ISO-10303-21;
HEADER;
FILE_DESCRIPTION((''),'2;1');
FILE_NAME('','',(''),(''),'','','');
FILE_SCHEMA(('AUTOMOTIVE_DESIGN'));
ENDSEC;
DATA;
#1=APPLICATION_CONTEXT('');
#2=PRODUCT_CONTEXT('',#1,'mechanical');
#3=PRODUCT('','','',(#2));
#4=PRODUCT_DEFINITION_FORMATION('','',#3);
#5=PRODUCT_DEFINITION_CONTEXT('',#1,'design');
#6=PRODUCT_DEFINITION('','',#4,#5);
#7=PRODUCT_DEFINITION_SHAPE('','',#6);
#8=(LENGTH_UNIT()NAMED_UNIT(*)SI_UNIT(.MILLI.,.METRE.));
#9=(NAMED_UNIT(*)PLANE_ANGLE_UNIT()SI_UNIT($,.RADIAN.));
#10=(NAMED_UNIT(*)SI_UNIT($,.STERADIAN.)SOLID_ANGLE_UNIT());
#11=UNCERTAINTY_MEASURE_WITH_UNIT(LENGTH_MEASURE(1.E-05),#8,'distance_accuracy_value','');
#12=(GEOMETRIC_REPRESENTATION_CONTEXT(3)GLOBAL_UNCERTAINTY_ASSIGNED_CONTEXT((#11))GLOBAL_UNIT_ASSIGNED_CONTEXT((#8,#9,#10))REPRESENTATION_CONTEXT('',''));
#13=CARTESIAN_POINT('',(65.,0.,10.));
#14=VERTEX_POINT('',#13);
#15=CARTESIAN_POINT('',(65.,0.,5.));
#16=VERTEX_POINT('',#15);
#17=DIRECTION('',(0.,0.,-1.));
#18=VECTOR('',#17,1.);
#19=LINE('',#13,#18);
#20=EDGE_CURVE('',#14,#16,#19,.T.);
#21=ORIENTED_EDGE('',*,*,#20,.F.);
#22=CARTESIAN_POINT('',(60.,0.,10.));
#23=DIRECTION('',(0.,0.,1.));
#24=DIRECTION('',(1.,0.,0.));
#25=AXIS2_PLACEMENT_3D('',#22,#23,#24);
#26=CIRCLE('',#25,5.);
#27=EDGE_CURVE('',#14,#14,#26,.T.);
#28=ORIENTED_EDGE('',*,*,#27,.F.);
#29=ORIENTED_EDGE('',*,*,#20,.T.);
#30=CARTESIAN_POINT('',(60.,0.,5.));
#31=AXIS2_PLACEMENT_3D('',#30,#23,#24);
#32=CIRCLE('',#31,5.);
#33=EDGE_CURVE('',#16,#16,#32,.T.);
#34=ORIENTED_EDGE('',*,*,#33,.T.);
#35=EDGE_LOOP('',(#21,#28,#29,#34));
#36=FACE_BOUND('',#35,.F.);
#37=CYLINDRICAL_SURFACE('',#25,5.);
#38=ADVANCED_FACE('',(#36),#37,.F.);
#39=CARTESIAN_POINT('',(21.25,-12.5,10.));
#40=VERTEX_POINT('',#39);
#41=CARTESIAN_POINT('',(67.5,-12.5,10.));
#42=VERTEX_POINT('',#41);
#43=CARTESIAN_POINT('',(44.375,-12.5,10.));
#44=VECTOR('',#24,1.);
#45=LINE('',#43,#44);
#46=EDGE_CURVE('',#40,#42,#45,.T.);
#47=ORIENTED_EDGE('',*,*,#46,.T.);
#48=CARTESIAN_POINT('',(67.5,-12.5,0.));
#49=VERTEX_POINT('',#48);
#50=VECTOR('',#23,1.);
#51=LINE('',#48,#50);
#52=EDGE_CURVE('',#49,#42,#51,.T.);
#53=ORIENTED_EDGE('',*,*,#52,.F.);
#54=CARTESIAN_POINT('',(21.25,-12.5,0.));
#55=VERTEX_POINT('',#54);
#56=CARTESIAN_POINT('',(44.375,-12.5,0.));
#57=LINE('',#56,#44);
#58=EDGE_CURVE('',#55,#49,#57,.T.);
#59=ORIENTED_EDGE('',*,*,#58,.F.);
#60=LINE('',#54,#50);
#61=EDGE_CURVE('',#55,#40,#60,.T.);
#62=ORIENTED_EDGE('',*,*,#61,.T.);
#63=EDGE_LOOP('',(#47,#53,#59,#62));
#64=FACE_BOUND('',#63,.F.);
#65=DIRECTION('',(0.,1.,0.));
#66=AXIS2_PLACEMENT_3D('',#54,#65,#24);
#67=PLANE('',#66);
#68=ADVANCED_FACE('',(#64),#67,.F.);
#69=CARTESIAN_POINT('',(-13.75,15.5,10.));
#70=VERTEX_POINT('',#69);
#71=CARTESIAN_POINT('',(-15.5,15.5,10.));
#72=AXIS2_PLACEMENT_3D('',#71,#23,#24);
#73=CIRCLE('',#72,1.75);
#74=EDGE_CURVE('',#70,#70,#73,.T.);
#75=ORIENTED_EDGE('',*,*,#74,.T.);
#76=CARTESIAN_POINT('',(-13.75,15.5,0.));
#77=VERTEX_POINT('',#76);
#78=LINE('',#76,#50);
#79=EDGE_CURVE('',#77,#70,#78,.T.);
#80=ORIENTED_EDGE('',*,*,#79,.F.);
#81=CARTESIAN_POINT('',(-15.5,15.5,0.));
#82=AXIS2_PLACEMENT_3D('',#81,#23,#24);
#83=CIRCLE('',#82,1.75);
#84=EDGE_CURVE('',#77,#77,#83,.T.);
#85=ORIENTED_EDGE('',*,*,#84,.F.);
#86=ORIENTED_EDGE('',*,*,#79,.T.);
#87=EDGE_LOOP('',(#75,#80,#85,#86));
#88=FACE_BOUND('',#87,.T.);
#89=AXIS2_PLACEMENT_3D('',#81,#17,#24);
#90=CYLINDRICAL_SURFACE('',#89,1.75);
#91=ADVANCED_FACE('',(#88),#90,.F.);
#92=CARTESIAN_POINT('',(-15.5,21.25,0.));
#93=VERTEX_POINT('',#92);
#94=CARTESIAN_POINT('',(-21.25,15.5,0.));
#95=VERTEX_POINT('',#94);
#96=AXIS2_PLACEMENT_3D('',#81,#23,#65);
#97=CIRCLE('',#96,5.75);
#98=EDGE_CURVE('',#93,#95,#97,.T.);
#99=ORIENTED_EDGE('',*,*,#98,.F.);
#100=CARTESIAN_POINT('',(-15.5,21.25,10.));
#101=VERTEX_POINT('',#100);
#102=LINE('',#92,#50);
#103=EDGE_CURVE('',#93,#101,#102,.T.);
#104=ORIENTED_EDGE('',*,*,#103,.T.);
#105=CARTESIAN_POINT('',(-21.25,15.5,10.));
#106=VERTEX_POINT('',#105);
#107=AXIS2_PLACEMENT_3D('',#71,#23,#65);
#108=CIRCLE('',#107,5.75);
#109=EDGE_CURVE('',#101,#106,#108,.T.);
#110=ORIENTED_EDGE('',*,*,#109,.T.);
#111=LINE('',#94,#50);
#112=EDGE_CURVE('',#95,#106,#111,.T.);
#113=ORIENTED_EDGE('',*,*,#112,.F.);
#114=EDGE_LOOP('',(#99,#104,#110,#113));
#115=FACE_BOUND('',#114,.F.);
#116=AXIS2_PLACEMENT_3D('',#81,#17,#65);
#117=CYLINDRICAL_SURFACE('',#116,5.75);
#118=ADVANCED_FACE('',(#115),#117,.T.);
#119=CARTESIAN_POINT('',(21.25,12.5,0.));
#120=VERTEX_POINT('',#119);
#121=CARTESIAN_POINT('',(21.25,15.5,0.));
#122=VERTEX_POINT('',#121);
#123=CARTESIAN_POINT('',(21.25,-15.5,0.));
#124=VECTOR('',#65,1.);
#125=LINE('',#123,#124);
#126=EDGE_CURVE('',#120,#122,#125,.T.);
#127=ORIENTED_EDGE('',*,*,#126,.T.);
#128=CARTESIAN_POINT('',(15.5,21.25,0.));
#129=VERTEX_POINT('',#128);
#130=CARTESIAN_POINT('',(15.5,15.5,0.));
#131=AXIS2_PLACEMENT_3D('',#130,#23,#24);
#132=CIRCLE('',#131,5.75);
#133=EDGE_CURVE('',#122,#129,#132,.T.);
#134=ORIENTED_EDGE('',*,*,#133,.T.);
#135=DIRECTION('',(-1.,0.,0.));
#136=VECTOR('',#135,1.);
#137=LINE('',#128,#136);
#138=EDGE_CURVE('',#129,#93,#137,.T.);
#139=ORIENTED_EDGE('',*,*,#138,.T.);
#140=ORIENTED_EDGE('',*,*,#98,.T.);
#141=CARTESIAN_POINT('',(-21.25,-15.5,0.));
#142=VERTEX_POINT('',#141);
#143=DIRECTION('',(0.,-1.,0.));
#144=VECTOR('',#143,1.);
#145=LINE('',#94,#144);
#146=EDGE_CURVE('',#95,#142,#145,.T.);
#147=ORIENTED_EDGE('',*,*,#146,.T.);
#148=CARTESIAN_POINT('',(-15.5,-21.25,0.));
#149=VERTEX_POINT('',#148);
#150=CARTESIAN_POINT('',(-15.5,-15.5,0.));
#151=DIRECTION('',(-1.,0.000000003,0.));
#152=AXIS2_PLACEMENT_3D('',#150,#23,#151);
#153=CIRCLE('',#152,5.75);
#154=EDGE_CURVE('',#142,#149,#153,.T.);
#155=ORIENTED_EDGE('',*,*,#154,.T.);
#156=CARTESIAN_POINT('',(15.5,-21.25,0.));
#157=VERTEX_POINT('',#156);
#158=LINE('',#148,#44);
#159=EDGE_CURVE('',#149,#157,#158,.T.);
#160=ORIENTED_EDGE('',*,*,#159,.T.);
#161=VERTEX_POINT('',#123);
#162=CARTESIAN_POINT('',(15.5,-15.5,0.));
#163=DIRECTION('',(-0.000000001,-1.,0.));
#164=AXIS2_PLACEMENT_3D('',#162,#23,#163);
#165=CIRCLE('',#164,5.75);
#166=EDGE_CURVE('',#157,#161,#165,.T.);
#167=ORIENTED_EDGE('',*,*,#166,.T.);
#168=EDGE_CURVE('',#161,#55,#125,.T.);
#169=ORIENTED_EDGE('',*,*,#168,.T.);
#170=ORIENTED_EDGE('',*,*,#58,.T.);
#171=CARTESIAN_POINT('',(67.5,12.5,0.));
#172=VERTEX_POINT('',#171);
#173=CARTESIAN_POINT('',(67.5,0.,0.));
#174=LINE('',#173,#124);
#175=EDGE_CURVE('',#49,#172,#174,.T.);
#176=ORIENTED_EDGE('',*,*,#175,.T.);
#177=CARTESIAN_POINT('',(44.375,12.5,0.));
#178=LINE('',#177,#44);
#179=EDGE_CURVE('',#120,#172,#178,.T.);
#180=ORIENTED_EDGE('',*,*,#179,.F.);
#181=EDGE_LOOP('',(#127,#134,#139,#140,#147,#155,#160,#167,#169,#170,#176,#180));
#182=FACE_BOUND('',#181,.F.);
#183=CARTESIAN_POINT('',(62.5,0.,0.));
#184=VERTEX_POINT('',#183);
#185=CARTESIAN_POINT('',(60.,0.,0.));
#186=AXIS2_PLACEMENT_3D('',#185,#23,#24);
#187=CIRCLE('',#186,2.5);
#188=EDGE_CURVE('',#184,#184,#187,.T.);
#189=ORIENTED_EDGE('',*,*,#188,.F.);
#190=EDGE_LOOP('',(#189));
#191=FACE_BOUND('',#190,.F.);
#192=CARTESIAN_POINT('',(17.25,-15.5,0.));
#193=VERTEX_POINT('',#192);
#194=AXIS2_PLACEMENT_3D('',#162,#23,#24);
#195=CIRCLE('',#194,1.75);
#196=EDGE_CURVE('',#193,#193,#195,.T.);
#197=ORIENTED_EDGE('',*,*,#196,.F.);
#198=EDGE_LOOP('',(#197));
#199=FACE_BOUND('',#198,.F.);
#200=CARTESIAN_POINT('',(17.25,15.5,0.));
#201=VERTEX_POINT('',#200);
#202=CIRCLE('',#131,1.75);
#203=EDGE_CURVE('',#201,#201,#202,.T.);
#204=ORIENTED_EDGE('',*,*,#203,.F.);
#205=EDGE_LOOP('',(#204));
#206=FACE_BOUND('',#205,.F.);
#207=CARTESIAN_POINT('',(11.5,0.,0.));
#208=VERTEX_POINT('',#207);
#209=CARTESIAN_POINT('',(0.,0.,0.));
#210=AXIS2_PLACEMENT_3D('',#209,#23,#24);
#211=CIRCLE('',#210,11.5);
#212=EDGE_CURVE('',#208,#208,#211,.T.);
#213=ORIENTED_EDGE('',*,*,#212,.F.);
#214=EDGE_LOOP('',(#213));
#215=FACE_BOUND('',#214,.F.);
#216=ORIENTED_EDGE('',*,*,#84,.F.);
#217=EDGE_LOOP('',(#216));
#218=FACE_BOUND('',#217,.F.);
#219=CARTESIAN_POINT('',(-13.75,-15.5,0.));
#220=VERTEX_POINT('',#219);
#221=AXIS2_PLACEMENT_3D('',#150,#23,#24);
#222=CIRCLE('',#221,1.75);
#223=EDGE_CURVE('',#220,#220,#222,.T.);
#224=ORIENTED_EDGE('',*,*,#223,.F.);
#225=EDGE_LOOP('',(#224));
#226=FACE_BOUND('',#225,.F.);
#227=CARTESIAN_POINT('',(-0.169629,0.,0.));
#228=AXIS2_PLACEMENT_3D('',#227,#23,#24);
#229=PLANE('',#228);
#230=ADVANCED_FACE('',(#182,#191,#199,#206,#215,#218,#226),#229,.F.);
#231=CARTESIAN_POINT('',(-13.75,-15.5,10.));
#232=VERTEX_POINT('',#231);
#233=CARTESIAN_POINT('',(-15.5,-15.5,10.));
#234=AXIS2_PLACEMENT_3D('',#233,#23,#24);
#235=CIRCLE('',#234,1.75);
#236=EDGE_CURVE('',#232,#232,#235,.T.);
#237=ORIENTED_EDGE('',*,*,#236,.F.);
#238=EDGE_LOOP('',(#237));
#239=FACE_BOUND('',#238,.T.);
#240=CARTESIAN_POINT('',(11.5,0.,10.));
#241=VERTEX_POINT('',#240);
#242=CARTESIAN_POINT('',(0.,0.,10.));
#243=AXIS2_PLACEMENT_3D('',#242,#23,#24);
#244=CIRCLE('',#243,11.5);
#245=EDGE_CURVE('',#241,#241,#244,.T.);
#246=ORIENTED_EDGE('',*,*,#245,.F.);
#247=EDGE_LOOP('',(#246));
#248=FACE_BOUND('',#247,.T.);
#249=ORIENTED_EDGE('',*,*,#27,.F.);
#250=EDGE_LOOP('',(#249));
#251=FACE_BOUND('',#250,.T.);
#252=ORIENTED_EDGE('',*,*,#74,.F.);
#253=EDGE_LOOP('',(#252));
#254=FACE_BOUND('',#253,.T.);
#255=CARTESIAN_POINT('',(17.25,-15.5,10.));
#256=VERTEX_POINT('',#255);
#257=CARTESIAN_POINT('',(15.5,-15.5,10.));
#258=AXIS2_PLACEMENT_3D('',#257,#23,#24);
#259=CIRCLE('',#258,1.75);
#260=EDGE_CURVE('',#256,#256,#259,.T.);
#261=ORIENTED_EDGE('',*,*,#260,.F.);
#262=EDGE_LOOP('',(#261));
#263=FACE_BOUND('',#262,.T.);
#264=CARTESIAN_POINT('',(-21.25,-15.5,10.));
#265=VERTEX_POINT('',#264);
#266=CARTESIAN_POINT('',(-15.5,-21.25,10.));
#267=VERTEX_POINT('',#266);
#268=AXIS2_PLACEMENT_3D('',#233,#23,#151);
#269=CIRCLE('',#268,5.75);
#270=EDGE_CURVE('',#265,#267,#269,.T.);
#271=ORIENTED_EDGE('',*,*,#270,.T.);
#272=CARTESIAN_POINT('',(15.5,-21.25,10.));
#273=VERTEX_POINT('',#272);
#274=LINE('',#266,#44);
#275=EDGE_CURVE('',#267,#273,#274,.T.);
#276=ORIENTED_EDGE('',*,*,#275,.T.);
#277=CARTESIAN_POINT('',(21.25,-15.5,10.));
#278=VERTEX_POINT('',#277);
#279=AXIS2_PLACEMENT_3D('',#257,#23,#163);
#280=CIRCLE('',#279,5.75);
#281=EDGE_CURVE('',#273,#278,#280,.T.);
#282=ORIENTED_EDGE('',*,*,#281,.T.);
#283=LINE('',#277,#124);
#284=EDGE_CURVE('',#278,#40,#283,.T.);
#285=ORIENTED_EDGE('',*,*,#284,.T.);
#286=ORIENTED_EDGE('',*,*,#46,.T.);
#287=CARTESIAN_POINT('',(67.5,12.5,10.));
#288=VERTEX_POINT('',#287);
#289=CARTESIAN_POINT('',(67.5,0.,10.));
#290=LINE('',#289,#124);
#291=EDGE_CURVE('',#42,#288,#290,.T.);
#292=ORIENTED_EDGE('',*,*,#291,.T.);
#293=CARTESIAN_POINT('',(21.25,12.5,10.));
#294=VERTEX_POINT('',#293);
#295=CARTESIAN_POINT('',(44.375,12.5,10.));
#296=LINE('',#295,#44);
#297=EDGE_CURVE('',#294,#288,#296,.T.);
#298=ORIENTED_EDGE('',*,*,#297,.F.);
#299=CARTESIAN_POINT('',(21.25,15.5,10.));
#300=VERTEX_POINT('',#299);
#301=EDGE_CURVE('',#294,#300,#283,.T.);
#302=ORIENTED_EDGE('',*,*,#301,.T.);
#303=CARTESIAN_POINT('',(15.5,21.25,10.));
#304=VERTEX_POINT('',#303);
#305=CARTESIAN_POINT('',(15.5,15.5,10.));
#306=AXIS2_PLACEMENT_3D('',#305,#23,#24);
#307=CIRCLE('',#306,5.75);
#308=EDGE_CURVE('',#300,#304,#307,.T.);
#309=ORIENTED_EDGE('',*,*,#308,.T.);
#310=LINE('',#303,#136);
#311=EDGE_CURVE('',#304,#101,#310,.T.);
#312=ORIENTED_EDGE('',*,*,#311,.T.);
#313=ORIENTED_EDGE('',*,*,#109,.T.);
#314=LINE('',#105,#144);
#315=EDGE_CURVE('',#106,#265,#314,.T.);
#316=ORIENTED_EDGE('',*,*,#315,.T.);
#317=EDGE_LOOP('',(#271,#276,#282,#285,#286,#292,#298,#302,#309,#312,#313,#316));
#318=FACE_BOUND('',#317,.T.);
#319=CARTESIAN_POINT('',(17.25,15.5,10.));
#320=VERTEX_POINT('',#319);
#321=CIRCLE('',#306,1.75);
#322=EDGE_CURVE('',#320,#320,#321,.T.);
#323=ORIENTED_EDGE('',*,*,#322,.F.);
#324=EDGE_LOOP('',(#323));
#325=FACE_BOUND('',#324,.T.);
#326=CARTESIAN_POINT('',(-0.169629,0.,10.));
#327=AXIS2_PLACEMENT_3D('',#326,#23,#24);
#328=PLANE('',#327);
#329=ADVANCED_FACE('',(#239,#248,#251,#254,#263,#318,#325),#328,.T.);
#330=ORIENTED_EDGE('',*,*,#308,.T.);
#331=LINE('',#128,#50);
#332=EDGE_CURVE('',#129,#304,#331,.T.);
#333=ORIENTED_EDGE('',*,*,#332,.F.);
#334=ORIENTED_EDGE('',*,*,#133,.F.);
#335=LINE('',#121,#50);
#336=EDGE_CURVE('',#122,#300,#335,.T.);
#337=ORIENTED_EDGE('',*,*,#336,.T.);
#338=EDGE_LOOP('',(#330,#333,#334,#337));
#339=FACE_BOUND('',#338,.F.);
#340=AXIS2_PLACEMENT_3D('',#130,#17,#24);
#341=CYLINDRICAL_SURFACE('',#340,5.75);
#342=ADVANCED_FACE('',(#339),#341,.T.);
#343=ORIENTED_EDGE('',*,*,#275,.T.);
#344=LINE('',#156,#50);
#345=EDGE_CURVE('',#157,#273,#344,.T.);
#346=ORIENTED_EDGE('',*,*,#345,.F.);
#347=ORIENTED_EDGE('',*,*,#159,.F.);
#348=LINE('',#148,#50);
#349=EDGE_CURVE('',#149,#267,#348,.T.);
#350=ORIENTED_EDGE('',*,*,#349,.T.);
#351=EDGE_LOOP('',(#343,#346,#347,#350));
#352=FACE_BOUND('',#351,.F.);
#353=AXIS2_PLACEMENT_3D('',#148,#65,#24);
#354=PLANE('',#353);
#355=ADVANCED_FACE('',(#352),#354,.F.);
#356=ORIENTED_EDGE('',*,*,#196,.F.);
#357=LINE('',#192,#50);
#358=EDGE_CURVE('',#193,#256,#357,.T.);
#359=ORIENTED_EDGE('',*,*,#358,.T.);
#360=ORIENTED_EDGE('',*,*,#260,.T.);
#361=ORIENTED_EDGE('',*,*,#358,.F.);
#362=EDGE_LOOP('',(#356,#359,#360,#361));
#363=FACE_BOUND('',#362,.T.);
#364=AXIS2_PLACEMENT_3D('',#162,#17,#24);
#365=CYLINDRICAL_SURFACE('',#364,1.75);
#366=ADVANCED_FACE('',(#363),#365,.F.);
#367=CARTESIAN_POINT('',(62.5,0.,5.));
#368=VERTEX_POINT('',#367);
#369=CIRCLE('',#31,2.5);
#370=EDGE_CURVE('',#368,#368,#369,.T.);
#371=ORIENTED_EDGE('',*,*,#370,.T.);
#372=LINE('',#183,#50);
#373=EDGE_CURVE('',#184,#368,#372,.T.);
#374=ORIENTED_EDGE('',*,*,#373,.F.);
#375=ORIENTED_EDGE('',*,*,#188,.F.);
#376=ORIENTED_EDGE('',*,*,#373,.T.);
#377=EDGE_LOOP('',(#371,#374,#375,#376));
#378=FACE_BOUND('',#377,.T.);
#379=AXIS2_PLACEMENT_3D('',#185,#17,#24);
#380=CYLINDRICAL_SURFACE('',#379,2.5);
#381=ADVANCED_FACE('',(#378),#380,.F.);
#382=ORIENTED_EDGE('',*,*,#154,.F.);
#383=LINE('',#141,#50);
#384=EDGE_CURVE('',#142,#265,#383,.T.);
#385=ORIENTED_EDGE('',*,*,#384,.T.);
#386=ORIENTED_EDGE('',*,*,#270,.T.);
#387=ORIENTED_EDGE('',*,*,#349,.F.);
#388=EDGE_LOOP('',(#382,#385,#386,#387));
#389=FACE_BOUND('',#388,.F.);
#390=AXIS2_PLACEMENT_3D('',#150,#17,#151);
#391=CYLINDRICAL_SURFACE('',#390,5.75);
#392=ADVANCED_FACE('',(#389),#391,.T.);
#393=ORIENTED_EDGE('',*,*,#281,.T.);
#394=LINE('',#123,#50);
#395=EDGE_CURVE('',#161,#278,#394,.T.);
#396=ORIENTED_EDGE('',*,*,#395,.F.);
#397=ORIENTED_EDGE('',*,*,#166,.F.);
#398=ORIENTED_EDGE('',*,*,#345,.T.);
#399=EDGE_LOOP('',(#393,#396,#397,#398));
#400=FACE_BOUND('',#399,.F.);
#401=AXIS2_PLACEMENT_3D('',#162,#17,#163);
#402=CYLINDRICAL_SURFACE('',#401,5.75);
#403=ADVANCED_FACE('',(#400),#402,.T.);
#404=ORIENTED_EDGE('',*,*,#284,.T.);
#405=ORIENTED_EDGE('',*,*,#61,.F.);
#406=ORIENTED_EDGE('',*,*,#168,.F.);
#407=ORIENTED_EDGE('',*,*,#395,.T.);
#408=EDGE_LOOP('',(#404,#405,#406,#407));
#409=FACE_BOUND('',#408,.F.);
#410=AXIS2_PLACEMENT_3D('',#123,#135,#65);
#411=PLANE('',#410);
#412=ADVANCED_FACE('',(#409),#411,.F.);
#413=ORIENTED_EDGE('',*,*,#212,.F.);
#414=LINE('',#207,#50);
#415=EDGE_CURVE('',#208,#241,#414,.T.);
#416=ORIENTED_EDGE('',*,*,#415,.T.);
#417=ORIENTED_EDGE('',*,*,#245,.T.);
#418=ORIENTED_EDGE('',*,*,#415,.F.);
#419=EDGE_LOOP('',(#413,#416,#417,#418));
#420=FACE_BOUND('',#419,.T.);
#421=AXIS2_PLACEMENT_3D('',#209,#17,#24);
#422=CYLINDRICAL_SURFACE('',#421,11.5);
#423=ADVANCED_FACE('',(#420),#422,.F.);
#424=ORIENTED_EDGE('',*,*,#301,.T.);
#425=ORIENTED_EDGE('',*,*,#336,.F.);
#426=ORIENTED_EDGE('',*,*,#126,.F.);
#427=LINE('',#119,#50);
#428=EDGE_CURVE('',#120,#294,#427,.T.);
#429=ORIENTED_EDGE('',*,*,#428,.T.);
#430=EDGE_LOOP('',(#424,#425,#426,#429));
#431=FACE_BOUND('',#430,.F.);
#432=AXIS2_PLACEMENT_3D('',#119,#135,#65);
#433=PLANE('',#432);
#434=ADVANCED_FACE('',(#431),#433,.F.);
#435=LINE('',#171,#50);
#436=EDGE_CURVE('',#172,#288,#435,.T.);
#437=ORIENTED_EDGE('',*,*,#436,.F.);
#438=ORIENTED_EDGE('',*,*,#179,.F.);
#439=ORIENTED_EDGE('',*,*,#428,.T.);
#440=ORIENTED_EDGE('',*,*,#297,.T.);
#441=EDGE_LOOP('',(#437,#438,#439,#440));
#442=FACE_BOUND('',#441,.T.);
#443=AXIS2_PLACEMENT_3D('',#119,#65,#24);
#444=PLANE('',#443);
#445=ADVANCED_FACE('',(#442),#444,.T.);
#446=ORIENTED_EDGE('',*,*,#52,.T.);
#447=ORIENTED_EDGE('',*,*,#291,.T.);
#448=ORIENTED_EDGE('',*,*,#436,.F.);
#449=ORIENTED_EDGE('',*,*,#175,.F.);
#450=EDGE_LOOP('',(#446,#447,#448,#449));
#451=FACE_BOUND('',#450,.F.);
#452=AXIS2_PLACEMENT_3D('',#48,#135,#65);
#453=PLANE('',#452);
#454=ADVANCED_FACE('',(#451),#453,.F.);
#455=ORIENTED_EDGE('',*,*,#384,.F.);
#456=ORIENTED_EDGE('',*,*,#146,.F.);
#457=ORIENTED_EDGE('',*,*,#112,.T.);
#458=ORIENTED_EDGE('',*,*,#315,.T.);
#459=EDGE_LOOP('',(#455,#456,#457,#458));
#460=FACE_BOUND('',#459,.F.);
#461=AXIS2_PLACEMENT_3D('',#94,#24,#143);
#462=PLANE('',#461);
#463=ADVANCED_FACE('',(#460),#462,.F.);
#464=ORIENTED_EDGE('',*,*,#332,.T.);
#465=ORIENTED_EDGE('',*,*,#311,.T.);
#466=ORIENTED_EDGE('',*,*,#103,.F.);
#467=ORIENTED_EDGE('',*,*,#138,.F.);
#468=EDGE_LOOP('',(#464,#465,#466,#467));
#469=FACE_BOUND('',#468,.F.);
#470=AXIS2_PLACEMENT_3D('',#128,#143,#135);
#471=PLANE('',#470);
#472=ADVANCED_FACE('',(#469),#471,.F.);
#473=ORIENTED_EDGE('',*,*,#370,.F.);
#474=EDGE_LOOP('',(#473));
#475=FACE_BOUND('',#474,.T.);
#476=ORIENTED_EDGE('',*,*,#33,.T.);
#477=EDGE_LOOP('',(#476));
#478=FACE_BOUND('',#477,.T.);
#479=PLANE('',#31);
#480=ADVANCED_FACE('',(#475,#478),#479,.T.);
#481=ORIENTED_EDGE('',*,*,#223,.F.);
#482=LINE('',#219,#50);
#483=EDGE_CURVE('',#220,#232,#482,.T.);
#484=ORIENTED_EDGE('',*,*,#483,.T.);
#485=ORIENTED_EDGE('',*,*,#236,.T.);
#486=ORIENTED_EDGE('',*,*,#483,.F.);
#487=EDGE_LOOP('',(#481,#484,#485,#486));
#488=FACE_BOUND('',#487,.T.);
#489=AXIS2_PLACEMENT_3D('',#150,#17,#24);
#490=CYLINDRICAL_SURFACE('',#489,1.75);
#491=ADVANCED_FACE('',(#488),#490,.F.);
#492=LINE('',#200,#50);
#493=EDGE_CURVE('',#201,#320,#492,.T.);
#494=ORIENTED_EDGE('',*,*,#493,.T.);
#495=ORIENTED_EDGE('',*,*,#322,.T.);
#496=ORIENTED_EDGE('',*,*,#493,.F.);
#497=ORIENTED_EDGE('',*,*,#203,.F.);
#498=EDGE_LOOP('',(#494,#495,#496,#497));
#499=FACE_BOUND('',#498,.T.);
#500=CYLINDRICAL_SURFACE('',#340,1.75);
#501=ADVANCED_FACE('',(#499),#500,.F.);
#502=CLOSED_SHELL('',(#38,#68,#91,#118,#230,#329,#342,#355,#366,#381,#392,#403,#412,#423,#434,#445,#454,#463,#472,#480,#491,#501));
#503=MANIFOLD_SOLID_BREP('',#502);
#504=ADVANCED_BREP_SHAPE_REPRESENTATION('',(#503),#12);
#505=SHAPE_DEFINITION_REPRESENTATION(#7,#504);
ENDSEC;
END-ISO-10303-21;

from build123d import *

# Parameters (mm, degrees)
F0_R     = 11.5
F0_R_2   = 1.75
F0_W     = 46.25
F0_H     = 25
F0_R_3   = 2.5
F1_DEPTH = 10
F2_R     = 5
F2_R_2   = 2.5
F3_DEPTH = 5


# Not quite as in the source:
# - a feature names something its author has since deleted; it is built from what else it names


with BuildPart() as f1:
    # F0 (on Top) → F1 (new body)
    with BuildSketch(Plane.XY):
        with BuildLine():
            Line((15.5000000202, 21.25), (-15.5, 21.25))
            ThreePointArc((-15.5, 21.25), (-11.4341360082, 19.5658639918), (-9.75, 15.5))
            ThreePointArc((-9.75, 15.5), (-15.5, 9.75), (-21.25, 15.5))
            Line((-21.25, 15.5), (-21.25, -15.4999999845))
            ThreePointArc((-21.25, -15.4999999845), (-15.4999999923, -9.75), (-9.75, -15.5))
            ThreePointArc((-9.75, -15.5), (-11.4341360082, -19.5658639918), (-15.5, -21.25))
            Line((-15.5, -21.25), (15.4999999923, -21.25))
            ThreePointArc((15.4999999923, -21.25), (11.4341360109, -11.4341360054), (21.25, -15.5))
            Line((21.25, -15.5), (21.25, -12.5))
            Line((21.25, -12.5), (21.25, 12.5))
            Line((21.25, 12.5), (21.25, 15.5))
            ThreePointArc((21.25, 15.5), (11.434136001, 11.4341360153), (15.5000000202, 21.25))
        make_face()
        Circle(F0_R, mode=Mode.SUBTRACT)
        with BuildLine():
            ThreePointArc((-9.75, -15.5), (-15.4999999923, -9.75), (-21.25, -15.4999999845))
            ThreePointArc((-21.25, -15.4999999845), (-19.5658639973, -19.5658639864), (-15.5, -21.25))
            ThreePointArc((-15.5, -21.25), (-11.4341360082, -19.5658639918), (-9.75, -15.5))
        make_face()
        with Locations((-15.5, -15.5)):
            Circle(F0_R_2, mode=Mode.SUBTRACT)
        with BuildLine():
            ThreePointArc((-9.75, 15.5), (-11.4341360082, 19.5658639918), (-15.5, 21.25))
            ThreePointArc((-15.5, 21.25), (-19.5658639918, 19.5658639918), (-21.25, 15.5))
            ThreePointArc((-21.25, 15.5), (-15.5, 9.75), (-9.75, 15.5))
        make_face()
        with Locations((-15.5, 15.5)):
            Circle(F0_R_2, mode=Mode.SUBTRACT)
        with BuildLine():
            ThreePointArc((21.25, 15.5), (19.565863999, 19.5658639847), (15.5000000202, 21.25))
            ThreePointArc((15.5000000202, 21.25), (11.434136001, 11.4341360153), (21.25, 15.5))
        make_face()
        with Locations((15.5, 15.5)):
            Circle(F0_R_2, mode=Mode.SUBTRACT)
        with BuildLine():
            ThreePointArc((21.25, -15.5), (11.4341360109, -11.4341360054), (15.4999999923, -21.25))
            ThreePointArc((15.4999999923, -21.25), (19.5658639891, -19.5658639946), (21.25, -15.5))
        make_face()
        with Locations((15.5, -15.5)):
            Circle(F0_R_2, mode=Mode.SUBTRACT)
        with Locations((44.375, 0)):
            Rectangle(F0_W, F0_H)
        with Locations((60, 0)):
            Circle(F0_R_3, mode=Mode.SUBTRACT)
    extrude(amount=F1_DEPTH)

    # F2 (on face) → F3 (cut)
    with BuildSketch(Plane.XY.offset(10)):
        with Locations((60, 0)):
            Circle(F2_R)
        with Locations((60, 0)):
            Circle(F2_R_2, mode=Mode.SUBTRACT)
    extrude(amount=-F3_DEPTH, mode=Mode.SUBTRACT)


solid = f1.part
